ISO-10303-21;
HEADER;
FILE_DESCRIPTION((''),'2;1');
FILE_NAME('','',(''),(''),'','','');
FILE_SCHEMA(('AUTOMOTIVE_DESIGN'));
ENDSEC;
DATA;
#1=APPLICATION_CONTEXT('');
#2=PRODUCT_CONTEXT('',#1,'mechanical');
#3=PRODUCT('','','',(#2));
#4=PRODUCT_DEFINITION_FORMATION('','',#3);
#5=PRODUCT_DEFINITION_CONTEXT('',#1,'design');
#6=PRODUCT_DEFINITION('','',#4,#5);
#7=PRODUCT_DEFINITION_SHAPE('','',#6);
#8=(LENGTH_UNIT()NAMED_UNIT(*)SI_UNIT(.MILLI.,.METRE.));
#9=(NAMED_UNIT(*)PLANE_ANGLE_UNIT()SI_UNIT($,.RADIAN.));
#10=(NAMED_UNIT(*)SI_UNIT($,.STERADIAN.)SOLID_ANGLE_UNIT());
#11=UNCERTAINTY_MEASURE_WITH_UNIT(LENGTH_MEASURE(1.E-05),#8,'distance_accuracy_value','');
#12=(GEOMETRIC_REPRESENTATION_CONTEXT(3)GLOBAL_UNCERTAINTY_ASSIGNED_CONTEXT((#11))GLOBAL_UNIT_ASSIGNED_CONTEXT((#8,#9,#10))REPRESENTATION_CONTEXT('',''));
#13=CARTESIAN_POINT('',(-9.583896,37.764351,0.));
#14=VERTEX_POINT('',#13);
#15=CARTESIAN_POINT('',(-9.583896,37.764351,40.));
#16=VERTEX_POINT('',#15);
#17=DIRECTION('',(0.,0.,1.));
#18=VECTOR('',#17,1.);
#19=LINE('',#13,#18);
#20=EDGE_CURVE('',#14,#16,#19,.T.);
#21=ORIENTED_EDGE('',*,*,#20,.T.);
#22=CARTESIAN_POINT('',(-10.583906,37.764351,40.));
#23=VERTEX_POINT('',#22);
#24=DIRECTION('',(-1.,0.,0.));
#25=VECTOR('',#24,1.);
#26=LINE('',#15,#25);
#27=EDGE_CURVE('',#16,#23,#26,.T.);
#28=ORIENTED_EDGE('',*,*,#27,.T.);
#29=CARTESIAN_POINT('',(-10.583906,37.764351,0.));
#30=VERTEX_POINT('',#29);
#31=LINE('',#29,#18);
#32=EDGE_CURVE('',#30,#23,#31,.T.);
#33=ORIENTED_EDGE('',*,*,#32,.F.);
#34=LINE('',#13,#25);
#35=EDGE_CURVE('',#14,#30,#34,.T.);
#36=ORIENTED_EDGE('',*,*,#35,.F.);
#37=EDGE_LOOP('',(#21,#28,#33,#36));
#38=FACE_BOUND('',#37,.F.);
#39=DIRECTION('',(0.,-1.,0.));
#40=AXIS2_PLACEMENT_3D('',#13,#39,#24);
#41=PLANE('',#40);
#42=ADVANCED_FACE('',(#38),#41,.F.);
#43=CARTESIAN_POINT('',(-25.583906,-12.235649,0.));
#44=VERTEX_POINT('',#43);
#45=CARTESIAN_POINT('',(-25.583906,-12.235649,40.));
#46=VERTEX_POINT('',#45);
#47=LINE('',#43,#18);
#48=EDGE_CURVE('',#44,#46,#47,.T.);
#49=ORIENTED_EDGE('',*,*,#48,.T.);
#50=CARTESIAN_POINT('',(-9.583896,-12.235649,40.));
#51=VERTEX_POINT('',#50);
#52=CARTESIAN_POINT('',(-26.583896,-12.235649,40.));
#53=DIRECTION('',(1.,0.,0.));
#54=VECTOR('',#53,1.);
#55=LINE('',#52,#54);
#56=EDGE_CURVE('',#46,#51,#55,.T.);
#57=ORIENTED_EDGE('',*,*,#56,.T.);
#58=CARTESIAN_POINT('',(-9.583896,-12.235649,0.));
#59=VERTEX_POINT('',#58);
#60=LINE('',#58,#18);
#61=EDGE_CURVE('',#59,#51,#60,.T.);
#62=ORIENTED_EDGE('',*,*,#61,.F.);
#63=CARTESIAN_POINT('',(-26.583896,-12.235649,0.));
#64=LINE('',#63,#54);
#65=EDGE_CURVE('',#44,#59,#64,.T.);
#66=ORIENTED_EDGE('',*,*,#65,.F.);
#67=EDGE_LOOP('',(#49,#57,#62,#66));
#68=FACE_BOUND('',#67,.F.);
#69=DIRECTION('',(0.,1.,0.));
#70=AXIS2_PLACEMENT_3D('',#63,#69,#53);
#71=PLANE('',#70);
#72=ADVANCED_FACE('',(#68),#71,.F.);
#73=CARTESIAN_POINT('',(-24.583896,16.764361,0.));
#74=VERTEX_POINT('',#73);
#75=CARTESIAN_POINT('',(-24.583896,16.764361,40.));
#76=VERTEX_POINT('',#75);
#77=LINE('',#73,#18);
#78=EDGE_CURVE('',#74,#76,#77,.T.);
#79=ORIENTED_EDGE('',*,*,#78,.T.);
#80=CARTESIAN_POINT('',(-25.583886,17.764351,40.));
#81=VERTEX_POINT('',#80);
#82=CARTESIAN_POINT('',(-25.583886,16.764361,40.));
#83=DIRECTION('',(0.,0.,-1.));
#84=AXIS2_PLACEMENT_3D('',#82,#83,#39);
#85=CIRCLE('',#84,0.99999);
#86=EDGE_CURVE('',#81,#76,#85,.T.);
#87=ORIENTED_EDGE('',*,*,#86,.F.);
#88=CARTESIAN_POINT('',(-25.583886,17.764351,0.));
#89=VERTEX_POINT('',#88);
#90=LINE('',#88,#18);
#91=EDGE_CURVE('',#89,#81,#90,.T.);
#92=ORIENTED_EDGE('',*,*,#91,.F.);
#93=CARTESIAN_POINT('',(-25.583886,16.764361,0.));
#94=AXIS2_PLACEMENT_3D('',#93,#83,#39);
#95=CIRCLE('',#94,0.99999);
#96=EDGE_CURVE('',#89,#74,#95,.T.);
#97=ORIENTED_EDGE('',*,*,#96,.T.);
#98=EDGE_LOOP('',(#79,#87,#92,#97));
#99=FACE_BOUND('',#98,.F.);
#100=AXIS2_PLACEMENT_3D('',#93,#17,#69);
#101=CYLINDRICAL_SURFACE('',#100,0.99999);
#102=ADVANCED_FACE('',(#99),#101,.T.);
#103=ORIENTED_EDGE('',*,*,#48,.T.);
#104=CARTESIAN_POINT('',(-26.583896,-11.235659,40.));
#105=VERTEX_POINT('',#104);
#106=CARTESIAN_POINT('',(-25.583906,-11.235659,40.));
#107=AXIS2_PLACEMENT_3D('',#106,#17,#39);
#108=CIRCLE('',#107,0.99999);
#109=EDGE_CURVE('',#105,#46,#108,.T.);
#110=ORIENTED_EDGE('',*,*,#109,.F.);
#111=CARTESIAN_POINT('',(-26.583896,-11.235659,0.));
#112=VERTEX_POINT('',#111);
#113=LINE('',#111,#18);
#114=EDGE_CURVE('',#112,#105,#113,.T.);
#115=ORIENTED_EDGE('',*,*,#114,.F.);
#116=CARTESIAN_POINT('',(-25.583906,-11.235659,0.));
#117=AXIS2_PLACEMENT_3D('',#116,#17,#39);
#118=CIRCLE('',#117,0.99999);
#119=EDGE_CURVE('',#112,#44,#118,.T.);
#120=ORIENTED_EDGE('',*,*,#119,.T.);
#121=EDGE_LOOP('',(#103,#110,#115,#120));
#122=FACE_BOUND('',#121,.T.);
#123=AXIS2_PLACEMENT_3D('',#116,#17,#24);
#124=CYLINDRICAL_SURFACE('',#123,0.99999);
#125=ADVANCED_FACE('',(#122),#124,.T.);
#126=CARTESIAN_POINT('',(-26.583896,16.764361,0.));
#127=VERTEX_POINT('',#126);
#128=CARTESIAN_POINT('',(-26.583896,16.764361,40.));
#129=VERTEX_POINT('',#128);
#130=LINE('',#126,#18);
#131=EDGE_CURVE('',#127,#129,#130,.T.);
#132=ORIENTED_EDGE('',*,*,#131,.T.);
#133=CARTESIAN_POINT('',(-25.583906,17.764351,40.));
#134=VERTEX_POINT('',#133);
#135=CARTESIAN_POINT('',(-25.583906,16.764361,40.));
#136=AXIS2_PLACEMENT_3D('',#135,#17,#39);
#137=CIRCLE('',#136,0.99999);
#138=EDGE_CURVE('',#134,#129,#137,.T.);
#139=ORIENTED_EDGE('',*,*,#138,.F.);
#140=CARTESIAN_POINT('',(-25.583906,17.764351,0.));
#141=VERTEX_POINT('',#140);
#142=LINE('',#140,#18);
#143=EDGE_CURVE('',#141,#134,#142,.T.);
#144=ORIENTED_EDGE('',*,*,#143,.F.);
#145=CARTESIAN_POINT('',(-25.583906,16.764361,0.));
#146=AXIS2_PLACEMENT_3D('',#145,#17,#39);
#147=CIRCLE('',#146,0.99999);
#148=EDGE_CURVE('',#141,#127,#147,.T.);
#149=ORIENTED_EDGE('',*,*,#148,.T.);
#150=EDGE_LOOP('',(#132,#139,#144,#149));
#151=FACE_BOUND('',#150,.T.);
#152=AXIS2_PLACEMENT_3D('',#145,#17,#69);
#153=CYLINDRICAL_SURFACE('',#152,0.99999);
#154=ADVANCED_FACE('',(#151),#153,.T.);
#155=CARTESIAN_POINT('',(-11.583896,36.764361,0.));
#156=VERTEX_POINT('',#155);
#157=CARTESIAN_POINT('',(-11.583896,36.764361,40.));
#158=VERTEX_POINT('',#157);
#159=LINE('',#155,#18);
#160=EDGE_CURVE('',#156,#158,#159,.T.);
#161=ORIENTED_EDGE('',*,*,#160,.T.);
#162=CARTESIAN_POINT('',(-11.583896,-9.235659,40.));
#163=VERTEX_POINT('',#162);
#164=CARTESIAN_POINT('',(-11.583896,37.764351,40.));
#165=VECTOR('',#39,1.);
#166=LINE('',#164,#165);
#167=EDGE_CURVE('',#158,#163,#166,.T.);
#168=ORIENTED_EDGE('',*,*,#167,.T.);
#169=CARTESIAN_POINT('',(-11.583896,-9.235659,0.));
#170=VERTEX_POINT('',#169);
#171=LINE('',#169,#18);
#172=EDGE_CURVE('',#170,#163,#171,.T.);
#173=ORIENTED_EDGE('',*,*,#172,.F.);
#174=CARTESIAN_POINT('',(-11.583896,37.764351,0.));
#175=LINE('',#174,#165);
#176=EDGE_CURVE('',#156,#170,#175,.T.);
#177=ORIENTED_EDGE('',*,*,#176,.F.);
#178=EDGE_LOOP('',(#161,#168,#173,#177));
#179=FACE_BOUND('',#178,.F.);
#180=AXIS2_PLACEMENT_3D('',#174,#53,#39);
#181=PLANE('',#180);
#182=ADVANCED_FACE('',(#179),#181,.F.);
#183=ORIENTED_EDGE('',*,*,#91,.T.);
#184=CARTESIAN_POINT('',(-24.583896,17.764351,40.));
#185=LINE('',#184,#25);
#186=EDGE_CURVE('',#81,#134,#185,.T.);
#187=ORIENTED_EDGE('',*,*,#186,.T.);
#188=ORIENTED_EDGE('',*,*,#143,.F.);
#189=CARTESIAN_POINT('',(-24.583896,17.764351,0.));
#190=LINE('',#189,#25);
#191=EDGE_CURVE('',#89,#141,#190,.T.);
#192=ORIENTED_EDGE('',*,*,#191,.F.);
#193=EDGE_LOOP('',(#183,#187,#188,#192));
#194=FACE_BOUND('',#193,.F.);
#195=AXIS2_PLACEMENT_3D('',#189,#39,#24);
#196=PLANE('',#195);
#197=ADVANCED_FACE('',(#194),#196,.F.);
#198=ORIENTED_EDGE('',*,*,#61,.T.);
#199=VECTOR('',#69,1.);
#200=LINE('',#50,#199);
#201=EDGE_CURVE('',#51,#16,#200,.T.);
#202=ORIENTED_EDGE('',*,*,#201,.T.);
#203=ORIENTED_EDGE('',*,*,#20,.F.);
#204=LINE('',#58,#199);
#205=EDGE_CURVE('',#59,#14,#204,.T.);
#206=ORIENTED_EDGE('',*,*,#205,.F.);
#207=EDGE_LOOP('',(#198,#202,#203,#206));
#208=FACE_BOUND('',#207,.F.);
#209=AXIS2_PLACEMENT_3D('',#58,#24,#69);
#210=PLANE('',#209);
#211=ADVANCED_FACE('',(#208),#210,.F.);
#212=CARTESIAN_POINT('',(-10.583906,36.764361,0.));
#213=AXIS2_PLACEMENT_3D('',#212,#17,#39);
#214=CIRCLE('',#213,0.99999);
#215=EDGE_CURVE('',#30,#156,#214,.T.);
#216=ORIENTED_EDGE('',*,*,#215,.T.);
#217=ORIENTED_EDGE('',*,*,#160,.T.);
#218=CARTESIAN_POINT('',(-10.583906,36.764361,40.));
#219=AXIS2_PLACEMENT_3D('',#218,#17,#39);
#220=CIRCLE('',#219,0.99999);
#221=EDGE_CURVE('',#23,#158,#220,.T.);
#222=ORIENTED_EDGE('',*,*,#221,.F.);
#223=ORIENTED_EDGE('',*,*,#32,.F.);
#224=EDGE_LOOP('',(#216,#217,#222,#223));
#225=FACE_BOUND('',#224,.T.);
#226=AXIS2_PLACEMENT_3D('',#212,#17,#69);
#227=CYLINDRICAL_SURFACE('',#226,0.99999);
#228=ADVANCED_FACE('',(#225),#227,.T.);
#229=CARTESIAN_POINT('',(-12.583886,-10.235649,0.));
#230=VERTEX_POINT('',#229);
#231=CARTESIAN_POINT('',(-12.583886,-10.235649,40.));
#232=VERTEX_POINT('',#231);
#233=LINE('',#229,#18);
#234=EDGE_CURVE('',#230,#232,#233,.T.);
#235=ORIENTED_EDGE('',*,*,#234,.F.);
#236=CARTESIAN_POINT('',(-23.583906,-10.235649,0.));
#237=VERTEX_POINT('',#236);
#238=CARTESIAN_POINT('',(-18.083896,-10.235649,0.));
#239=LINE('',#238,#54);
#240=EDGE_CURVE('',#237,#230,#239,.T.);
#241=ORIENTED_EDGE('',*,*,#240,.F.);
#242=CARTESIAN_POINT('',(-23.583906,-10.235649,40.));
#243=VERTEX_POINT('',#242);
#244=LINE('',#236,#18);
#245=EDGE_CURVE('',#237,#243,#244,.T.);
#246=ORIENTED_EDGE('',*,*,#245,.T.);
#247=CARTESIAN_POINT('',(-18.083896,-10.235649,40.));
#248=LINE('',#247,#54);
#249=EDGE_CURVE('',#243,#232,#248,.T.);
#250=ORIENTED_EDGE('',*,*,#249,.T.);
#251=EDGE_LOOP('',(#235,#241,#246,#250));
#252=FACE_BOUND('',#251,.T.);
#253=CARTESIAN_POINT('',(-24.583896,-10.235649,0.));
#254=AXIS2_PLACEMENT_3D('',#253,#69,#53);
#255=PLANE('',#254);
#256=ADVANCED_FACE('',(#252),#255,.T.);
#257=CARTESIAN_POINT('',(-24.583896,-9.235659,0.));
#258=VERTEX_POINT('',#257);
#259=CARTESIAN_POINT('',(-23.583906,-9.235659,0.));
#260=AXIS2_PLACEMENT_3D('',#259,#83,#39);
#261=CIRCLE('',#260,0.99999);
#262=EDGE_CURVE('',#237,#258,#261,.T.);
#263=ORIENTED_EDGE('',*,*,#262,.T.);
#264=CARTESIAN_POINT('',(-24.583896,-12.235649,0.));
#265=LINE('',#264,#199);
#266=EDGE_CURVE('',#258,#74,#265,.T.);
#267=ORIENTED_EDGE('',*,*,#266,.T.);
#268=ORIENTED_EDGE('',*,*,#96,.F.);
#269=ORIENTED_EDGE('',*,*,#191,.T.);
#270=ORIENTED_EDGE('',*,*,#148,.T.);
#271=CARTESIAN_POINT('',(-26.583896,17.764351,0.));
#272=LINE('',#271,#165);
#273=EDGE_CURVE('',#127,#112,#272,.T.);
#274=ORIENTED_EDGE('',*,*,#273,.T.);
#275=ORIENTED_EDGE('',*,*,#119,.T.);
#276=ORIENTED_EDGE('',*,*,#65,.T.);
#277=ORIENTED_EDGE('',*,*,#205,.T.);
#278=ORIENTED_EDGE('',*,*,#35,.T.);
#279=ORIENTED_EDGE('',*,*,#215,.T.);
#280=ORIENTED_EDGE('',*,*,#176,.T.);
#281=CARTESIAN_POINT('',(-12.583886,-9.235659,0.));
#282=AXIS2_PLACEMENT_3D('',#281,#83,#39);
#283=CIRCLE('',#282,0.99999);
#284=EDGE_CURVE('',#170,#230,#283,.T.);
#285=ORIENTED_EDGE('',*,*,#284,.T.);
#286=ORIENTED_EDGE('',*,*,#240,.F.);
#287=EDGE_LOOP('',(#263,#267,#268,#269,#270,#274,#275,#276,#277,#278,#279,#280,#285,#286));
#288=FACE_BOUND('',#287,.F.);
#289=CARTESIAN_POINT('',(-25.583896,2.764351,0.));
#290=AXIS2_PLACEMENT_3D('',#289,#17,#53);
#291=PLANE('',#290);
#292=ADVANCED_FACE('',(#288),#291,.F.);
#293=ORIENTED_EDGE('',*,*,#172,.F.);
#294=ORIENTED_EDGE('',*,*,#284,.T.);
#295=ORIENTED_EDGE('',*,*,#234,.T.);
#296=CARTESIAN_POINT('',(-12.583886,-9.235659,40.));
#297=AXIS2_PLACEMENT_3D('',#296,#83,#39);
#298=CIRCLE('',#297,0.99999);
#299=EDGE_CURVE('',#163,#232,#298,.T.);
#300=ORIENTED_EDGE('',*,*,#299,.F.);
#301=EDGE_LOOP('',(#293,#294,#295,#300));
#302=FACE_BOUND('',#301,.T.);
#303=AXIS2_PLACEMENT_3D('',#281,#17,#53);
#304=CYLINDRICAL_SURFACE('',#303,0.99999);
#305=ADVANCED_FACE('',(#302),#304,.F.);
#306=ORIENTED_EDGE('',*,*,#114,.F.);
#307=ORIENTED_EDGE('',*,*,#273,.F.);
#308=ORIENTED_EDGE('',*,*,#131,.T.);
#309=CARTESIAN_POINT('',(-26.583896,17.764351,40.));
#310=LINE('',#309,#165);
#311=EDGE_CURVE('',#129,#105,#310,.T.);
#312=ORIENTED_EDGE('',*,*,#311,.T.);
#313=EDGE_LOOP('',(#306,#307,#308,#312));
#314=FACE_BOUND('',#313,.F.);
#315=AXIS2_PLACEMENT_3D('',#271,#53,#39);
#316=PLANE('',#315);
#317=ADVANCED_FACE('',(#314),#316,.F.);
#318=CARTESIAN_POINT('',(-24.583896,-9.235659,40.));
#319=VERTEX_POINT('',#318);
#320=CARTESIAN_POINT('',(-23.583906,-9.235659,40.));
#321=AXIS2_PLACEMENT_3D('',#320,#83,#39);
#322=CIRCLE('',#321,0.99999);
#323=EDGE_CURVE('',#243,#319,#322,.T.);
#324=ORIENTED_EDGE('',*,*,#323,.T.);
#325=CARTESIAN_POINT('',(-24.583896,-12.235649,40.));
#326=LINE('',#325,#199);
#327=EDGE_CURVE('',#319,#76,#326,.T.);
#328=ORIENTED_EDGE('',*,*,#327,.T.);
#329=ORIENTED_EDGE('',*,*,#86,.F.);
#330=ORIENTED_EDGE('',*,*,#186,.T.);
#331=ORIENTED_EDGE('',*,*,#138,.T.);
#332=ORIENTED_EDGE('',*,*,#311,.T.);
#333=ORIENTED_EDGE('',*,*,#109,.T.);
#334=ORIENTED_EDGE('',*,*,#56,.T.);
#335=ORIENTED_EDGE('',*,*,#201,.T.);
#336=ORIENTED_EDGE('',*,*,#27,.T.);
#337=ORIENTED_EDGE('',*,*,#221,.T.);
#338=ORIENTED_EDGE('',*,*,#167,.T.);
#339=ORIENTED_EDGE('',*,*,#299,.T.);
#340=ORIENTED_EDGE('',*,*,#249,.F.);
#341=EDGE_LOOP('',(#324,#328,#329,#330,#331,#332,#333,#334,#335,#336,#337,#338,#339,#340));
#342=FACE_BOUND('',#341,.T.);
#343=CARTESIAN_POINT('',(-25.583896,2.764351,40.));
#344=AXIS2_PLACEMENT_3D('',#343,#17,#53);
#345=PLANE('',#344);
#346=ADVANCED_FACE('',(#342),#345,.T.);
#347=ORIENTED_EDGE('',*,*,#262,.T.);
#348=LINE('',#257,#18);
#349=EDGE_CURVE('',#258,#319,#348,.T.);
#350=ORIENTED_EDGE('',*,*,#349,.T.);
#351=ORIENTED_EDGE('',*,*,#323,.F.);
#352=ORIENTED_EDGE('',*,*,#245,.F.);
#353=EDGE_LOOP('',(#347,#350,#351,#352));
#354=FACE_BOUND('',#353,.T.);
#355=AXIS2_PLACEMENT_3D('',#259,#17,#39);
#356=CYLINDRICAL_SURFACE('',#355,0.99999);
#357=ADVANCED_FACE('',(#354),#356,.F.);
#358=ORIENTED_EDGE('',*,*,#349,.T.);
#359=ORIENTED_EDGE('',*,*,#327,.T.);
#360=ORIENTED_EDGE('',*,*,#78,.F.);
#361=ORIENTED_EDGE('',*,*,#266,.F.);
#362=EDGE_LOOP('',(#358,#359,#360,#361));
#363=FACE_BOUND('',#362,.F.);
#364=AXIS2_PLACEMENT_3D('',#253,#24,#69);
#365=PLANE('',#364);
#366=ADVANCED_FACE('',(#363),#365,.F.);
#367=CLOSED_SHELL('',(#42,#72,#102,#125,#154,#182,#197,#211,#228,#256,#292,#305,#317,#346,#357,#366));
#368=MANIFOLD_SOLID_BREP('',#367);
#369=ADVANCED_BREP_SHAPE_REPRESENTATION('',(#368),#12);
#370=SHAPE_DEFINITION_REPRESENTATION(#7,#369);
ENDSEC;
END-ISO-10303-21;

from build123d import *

# Parameters (mm, degrees)
F0_W     = 13
F0_H     = 2
F1_DEPTH = 40
F2_R     = 0.99999


# Not quite as in the source:
# - a fillet or chamfer is up to 0.001 mm smaller than in the source, because OpenCascade refuses the exact size


with BuildPart() as f1:
    # F0 (on Top) → F1 (new body)
    with BuildSketch(Plane.XY):
        Polygon((-24.5838956386, 17.7643506003), (-26.5838956386, 17.7643506003), (-26.5838956386, -12.2356493997), (-24.5838956386, -12.2356493997), (-24.5838956386, -10.2356493997), align=None)
        with Locations((-18.0838956386, -11.2356493997)):
            Rectangle(F0_W, F0_H)
        Polygon((-11.5838956386, 37.7643506003), (-11.5838956386, -10.2356493997), (-11.5838956386, -12.2356493997), (-9.5838956386, -12.2356493997), (-9.5838956386, 37.7643506003), align=None)
    extrude(amount=F1_DEPTH)

    # F2 (radius 1 in the source; OpenCascade refuses exactly that, so slightly less here)
    f2_edges = [f1.edges().sort_by_distance(p)[0] for p in [
        (-26.583896, 17.764351, 20),
        (-24.583896, 17.764351, 20),
        (-11.583896, 37.764351, 20),
        (-26.583896, -12.235649, 20),
        (-24.583896, -10.235649, 20),
        (-11.583896, -10.235649, 20),
    ]]
    fillet(f2_edges, radius=F2_R)


solid = f1.part
